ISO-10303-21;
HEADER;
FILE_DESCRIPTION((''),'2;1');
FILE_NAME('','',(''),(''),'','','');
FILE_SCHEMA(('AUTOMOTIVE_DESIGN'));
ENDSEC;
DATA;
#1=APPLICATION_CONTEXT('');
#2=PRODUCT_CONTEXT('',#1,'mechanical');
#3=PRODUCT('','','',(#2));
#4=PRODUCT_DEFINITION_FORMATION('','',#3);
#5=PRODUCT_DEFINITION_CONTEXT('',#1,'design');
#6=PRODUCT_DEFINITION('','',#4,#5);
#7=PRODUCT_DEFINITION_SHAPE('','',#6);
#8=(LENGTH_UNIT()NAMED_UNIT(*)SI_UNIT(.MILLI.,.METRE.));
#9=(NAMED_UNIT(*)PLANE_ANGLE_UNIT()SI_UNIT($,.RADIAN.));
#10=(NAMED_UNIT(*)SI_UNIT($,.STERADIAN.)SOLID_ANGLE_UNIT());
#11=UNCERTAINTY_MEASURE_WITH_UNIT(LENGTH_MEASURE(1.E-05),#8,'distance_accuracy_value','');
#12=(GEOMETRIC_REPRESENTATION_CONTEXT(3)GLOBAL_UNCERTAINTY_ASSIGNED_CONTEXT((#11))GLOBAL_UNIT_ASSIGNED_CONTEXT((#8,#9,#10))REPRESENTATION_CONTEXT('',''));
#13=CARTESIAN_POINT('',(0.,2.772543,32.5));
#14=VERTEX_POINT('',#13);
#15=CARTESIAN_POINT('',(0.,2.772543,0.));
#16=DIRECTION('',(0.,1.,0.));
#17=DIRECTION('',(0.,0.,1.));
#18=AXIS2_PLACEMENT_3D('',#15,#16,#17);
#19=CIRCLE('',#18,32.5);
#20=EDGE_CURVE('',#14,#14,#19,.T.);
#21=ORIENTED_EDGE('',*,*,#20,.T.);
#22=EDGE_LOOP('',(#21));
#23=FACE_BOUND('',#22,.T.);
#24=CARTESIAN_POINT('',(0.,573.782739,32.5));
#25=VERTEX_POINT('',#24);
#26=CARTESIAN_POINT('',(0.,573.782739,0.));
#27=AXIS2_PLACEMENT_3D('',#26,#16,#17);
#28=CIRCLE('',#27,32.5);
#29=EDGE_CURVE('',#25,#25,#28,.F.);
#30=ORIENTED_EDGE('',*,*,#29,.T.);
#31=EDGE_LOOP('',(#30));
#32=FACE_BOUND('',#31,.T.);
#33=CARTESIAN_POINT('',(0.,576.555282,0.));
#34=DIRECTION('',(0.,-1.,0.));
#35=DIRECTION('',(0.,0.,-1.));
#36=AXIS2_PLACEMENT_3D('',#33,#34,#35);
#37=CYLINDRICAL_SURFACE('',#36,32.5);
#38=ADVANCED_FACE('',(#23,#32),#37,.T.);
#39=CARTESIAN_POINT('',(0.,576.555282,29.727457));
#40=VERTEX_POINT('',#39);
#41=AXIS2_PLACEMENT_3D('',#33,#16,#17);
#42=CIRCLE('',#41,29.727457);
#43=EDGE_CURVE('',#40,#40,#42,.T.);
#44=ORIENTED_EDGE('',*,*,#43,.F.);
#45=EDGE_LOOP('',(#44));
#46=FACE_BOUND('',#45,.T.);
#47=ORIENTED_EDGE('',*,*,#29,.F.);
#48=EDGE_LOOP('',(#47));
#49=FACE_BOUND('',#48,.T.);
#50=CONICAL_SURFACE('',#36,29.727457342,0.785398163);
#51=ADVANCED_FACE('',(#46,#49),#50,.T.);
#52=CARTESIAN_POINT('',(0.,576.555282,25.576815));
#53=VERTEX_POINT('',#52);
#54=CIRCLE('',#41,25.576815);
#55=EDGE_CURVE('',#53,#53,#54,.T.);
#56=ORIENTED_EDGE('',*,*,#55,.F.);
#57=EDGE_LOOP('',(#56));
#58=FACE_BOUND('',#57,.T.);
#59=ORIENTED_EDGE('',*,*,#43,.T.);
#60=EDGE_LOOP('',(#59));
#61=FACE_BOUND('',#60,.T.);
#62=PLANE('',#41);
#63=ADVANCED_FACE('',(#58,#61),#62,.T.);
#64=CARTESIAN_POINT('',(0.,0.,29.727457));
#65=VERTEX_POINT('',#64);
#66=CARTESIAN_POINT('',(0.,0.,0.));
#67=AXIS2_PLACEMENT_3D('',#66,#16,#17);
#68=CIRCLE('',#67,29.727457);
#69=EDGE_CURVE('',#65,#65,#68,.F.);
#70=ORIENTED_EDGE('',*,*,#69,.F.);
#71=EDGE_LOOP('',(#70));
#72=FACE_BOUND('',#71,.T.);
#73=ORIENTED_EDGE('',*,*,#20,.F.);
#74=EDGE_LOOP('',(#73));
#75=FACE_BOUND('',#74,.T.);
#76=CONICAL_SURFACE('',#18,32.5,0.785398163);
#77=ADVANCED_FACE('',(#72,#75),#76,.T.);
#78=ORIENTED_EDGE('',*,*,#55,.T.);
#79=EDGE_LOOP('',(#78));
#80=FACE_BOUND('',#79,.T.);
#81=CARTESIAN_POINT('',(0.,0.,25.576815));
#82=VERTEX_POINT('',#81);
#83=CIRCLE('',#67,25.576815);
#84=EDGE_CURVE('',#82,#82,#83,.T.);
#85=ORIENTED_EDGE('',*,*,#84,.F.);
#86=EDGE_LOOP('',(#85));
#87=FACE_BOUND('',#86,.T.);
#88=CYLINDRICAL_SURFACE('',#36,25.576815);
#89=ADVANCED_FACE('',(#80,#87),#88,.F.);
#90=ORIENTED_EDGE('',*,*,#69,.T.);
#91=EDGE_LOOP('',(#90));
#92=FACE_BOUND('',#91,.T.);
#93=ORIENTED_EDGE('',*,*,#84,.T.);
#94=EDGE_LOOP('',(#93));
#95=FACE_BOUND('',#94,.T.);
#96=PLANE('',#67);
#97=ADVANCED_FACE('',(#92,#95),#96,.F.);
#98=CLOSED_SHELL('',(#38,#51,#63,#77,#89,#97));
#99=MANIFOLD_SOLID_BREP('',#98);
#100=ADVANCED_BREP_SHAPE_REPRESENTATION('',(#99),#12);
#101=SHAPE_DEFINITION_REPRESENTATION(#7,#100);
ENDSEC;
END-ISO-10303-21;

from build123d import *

# Parameters (mm, degrees)
SKETCH1_R           = 32.5
BOSS_EXTRUDE1_DEPTH = 576.555281837
SKETCH2_R           = 25.576815211
CUT_EXTRUDE1_DEPTH  = 579.384381717
CHAMFER1_SIZE       = 2.772542658


with BuildPart() as part:
    # Sketch1 → Boss-Extrude1 (new body)
    with BuildSketch(Plane(origin=(0, 0, 0), x_dir=(1, 0, 0), z_dir=(0, 1, 0))):
        Circle(SKETCH1_R)
    extrude(amount=BOSS_EXTRUDE1_DEPTH)

    # Sketch2 → Cut-Extrude1 (cut, through all)
    with BuildSketch(Plane(origin=(0, 0, 0), x_dir=(1, 0, 0), z_dir=(0, 1, 0))):
        Circle(SKETCH2_R)
    extrude(amount=CUT_EXTRUDE1_DEPTH, mode=Mode.SUBTRACT)

    # Chamfer1
    chamfer1_edges = [part.edges().sort_by_distance(p)[0] for p in [
        (-32.5, 576.555281837, 0),
        (-32.5, 0, 0),
    ]]
    chamfer(chamfer1_edges, length=CHAMFER1_SIZE)


solid = part.part
